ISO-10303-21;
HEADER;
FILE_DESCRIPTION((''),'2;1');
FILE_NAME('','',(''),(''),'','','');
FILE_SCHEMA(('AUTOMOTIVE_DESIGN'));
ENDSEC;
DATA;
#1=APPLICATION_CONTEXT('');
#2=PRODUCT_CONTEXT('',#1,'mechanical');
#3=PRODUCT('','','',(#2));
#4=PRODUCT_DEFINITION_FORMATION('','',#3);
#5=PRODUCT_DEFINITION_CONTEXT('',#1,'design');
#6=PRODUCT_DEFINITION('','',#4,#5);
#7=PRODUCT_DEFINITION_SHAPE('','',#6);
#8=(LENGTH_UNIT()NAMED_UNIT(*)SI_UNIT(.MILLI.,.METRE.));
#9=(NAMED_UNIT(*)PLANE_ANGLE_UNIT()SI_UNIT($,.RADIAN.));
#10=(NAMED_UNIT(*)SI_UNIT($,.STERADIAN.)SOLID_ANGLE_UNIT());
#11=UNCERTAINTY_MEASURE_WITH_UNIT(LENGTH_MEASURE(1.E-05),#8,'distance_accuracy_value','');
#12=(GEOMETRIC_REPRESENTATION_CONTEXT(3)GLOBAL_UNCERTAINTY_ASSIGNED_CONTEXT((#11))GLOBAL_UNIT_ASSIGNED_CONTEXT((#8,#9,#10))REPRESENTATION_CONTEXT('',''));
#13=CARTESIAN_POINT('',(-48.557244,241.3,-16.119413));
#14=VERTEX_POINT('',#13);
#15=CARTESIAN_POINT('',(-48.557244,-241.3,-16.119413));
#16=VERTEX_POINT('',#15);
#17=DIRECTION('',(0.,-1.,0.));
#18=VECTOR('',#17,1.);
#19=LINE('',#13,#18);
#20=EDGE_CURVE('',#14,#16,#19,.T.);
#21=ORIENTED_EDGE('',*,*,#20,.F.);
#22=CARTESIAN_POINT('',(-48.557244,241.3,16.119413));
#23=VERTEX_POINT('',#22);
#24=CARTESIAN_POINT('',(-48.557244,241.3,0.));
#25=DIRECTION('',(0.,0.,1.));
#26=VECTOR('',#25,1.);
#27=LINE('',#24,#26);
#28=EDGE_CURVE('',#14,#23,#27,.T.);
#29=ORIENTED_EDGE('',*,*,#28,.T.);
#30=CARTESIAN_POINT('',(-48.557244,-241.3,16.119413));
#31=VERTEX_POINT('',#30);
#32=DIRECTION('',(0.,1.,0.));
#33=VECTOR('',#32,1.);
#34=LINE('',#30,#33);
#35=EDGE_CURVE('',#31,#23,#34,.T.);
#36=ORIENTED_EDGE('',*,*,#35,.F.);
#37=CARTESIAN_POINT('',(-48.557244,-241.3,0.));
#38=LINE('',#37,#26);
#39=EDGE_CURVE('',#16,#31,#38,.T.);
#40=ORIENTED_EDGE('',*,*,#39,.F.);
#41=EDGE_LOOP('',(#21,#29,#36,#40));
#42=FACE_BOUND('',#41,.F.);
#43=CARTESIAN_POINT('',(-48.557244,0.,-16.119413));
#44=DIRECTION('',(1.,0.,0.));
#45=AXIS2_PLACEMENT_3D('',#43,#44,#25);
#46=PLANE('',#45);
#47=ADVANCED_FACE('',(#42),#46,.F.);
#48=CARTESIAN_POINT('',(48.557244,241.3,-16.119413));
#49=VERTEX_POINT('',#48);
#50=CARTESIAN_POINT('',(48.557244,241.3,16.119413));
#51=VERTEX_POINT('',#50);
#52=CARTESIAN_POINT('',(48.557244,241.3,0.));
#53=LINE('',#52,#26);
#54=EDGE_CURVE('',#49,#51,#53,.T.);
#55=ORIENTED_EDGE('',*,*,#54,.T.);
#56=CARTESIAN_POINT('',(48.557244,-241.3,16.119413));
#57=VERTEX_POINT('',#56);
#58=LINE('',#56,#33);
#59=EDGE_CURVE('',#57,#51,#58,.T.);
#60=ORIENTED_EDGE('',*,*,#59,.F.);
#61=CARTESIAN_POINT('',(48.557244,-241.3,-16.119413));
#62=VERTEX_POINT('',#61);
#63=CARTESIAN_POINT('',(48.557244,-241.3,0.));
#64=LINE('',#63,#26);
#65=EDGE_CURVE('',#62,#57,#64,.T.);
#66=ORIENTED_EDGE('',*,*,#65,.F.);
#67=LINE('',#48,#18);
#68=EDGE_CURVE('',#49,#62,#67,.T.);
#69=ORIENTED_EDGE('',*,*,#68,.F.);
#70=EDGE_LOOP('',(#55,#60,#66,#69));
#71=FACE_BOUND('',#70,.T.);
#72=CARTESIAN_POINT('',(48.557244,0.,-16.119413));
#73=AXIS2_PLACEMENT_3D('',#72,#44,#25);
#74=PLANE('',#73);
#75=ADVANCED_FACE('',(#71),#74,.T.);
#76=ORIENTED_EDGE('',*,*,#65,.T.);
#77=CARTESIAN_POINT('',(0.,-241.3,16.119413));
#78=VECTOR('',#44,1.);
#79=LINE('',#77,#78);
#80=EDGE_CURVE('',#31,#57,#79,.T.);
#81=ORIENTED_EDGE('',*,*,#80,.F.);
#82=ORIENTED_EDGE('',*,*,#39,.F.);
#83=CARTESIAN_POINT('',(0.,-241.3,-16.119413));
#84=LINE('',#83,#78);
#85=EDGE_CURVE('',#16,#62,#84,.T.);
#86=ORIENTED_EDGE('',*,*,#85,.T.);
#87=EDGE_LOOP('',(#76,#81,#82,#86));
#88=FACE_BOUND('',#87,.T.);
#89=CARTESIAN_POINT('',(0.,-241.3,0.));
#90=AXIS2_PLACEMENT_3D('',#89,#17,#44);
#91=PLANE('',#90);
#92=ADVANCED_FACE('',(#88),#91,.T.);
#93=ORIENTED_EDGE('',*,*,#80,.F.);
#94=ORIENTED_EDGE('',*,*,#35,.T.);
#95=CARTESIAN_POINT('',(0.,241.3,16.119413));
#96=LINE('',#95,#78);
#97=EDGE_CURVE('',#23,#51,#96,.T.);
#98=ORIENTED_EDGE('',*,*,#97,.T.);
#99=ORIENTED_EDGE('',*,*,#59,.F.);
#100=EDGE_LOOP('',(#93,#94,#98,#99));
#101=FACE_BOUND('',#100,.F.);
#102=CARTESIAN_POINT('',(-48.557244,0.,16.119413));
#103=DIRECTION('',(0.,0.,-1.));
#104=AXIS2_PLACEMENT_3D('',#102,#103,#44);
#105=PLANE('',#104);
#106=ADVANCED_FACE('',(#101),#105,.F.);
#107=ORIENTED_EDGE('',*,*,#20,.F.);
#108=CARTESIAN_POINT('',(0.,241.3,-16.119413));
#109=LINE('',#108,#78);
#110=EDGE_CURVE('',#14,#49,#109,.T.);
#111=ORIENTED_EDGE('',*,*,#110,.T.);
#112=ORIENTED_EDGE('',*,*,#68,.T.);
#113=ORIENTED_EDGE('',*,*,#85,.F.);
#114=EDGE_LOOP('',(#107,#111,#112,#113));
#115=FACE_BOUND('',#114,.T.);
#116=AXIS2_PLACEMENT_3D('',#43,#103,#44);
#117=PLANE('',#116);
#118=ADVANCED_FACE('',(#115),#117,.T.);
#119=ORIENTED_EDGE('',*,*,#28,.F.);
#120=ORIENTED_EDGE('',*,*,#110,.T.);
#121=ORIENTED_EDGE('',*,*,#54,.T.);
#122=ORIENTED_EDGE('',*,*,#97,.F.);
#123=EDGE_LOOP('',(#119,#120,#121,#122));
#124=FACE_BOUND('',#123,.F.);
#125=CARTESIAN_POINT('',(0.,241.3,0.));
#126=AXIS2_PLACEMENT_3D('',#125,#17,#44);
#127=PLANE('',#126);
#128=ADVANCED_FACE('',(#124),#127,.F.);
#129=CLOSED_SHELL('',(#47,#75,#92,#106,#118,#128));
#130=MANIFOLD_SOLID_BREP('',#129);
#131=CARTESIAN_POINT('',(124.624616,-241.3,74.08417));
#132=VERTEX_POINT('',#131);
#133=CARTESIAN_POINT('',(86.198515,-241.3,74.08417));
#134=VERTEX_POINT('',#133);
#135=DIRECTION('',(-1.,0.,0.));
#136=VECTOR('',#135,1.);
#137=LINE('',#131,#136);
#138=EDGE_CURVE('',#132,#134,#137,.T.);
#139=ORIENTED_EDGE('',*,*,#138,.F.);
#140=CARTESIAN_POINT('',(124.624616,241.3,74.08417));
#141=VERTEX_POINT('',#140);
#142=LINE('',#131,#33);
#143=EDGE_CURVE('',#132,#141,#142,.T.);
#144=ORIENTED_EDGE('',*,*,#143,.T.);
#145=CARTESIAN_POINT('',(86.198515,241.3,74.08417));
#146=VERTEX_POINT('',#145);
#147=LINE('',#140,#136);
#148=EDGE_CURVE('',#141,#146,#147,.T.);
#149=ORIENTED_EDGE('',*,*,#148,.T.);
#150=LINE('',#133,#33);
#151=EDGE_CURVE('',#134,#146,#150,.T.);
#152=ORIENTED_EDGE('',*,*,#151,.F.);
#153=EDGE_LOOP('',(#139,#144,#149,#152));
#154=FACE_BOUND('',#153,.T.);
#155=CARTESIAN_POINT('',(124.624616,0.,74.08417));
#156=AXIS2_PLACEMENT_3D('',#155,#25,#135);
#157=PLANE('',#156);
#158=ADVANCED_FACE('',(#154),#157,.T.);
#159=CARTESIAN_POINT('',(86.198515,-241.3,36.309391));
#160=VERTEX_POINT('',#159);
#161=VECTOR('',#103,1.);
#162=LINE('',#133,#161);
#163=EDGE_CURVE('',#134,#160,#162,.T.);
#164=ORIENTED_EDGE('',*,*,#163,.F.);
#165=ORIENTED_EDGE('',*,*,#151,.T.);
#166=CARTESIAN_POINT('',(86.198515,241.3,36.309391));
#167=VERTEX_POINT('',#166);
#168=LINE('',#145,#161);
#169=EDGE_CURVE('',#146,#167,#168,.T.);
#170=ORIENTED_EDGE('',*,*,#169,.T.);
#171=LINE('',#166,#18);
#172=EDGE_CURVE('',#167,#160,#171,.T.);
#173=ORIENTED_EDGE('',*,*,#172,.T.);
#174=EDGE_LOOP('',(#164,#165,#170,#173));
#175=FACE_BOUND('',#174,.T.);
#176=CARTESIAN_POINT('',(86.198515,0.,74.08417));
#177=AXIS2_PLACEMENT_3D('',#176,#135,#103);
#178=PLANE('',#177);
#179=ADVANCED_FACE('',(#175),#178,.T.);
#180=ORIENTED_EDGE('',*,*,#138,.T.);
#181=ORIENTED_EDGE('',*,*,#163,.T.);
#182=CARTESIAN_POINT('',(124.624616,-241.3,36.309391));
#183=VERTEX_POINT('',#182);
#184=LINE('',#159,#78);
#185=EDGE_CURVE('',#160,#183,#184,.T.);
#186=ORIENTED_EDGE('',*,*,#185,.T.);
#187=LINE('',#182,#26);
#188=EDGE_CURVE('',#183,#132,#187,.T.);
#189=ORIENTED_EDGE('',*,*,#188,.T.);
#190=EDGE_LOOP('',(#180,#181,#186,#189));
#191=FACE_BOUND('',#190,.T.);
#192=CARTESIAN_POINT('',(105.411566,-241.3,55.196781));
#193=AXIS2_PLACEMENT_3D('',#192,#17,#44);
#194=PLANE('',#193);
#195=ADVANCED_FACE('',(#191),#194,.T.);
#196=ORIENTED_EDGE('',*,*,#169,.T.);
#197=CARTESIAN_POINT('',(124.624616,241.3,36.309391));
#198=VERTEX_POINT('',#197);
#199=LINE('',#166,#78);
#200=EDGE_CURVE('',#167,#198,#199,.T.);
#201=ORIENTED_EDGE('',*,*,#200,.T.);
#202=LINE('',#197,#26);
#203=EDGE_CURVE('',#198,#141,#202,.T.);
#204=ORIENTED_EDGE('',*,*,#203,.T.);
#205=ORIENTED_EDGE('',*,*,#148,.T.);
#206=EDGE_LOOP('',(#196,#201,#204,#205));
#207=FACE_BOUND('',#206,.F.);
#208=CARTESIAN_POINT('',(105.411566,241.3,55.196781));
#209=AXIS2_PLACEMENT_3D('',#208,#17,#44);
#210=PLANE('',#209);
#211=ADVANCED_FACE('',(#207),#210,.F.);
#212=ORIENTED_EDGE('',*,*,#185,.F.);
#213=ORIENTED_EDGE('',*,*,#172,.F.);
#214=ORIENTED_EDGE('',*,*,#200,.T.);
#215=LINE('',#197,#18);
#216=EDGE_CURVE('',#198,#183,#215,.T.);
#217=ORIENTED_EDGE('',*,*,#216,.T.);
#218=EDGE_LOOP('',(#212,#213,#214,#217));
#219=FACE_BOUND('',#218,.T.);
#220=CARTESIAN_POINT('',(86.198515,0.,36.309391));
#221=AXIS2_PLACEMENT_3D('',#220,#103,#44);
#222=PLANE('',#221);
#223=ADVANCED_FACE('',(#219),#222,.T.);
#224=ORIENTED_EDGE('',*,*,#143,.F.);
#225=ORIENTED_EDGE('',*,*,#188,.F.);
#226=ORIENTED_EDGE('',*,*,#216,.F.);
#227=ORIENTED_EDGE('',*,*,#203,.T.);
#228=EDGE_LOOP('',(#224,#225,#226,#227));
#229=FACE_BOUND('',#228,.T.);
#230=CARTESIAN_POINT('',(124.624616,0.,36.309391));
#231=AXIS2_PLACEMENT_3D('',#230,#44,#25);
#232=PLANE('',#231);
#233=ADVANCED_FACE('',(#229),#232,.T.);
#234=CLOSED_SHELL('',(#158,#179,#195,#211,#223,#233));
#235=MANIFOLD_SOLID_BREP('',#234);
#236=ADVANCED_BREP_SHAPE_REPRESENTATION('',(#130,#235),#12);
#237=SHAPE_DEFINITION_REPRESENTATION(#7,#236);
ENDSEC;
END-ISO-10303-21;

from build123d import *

# Parameters (mm, degrees)
F0_W     = 97.1144884825
F0_H     = 32.2388261557
F1_DEPTH = 241.3


# Not quite as in the source:
# - the program builds the solid bodies; features that only make, move or delete a surface that nothing else refers to are left out


with BuildPart() as f1:
    # F0 (on Front) → F1 (new body, symmetric)
    with BuildSketch(Plane.XZ):
        Rectangle(F0_W, F0_H)
    extrude(amount=F1_DEPTH, both=True)


with BuildPart() as f1b:
    # F0 (on Front) → F1, piece 2 (new body, symmetric)
    with BuildSketch(Plane.XZ):
        Polygon((86.1985152434, 74.0841701627), (86.1985152434, 55.1967807114), (86.1985152434, 36.3093912601), (124.6246164511, 36.3093912601), (124.6246164511, 74.0841701627), align=None)
    extrude(amount=F1_DEPTH, both=True)


solid = Compound([f1.part, f1b.part])
